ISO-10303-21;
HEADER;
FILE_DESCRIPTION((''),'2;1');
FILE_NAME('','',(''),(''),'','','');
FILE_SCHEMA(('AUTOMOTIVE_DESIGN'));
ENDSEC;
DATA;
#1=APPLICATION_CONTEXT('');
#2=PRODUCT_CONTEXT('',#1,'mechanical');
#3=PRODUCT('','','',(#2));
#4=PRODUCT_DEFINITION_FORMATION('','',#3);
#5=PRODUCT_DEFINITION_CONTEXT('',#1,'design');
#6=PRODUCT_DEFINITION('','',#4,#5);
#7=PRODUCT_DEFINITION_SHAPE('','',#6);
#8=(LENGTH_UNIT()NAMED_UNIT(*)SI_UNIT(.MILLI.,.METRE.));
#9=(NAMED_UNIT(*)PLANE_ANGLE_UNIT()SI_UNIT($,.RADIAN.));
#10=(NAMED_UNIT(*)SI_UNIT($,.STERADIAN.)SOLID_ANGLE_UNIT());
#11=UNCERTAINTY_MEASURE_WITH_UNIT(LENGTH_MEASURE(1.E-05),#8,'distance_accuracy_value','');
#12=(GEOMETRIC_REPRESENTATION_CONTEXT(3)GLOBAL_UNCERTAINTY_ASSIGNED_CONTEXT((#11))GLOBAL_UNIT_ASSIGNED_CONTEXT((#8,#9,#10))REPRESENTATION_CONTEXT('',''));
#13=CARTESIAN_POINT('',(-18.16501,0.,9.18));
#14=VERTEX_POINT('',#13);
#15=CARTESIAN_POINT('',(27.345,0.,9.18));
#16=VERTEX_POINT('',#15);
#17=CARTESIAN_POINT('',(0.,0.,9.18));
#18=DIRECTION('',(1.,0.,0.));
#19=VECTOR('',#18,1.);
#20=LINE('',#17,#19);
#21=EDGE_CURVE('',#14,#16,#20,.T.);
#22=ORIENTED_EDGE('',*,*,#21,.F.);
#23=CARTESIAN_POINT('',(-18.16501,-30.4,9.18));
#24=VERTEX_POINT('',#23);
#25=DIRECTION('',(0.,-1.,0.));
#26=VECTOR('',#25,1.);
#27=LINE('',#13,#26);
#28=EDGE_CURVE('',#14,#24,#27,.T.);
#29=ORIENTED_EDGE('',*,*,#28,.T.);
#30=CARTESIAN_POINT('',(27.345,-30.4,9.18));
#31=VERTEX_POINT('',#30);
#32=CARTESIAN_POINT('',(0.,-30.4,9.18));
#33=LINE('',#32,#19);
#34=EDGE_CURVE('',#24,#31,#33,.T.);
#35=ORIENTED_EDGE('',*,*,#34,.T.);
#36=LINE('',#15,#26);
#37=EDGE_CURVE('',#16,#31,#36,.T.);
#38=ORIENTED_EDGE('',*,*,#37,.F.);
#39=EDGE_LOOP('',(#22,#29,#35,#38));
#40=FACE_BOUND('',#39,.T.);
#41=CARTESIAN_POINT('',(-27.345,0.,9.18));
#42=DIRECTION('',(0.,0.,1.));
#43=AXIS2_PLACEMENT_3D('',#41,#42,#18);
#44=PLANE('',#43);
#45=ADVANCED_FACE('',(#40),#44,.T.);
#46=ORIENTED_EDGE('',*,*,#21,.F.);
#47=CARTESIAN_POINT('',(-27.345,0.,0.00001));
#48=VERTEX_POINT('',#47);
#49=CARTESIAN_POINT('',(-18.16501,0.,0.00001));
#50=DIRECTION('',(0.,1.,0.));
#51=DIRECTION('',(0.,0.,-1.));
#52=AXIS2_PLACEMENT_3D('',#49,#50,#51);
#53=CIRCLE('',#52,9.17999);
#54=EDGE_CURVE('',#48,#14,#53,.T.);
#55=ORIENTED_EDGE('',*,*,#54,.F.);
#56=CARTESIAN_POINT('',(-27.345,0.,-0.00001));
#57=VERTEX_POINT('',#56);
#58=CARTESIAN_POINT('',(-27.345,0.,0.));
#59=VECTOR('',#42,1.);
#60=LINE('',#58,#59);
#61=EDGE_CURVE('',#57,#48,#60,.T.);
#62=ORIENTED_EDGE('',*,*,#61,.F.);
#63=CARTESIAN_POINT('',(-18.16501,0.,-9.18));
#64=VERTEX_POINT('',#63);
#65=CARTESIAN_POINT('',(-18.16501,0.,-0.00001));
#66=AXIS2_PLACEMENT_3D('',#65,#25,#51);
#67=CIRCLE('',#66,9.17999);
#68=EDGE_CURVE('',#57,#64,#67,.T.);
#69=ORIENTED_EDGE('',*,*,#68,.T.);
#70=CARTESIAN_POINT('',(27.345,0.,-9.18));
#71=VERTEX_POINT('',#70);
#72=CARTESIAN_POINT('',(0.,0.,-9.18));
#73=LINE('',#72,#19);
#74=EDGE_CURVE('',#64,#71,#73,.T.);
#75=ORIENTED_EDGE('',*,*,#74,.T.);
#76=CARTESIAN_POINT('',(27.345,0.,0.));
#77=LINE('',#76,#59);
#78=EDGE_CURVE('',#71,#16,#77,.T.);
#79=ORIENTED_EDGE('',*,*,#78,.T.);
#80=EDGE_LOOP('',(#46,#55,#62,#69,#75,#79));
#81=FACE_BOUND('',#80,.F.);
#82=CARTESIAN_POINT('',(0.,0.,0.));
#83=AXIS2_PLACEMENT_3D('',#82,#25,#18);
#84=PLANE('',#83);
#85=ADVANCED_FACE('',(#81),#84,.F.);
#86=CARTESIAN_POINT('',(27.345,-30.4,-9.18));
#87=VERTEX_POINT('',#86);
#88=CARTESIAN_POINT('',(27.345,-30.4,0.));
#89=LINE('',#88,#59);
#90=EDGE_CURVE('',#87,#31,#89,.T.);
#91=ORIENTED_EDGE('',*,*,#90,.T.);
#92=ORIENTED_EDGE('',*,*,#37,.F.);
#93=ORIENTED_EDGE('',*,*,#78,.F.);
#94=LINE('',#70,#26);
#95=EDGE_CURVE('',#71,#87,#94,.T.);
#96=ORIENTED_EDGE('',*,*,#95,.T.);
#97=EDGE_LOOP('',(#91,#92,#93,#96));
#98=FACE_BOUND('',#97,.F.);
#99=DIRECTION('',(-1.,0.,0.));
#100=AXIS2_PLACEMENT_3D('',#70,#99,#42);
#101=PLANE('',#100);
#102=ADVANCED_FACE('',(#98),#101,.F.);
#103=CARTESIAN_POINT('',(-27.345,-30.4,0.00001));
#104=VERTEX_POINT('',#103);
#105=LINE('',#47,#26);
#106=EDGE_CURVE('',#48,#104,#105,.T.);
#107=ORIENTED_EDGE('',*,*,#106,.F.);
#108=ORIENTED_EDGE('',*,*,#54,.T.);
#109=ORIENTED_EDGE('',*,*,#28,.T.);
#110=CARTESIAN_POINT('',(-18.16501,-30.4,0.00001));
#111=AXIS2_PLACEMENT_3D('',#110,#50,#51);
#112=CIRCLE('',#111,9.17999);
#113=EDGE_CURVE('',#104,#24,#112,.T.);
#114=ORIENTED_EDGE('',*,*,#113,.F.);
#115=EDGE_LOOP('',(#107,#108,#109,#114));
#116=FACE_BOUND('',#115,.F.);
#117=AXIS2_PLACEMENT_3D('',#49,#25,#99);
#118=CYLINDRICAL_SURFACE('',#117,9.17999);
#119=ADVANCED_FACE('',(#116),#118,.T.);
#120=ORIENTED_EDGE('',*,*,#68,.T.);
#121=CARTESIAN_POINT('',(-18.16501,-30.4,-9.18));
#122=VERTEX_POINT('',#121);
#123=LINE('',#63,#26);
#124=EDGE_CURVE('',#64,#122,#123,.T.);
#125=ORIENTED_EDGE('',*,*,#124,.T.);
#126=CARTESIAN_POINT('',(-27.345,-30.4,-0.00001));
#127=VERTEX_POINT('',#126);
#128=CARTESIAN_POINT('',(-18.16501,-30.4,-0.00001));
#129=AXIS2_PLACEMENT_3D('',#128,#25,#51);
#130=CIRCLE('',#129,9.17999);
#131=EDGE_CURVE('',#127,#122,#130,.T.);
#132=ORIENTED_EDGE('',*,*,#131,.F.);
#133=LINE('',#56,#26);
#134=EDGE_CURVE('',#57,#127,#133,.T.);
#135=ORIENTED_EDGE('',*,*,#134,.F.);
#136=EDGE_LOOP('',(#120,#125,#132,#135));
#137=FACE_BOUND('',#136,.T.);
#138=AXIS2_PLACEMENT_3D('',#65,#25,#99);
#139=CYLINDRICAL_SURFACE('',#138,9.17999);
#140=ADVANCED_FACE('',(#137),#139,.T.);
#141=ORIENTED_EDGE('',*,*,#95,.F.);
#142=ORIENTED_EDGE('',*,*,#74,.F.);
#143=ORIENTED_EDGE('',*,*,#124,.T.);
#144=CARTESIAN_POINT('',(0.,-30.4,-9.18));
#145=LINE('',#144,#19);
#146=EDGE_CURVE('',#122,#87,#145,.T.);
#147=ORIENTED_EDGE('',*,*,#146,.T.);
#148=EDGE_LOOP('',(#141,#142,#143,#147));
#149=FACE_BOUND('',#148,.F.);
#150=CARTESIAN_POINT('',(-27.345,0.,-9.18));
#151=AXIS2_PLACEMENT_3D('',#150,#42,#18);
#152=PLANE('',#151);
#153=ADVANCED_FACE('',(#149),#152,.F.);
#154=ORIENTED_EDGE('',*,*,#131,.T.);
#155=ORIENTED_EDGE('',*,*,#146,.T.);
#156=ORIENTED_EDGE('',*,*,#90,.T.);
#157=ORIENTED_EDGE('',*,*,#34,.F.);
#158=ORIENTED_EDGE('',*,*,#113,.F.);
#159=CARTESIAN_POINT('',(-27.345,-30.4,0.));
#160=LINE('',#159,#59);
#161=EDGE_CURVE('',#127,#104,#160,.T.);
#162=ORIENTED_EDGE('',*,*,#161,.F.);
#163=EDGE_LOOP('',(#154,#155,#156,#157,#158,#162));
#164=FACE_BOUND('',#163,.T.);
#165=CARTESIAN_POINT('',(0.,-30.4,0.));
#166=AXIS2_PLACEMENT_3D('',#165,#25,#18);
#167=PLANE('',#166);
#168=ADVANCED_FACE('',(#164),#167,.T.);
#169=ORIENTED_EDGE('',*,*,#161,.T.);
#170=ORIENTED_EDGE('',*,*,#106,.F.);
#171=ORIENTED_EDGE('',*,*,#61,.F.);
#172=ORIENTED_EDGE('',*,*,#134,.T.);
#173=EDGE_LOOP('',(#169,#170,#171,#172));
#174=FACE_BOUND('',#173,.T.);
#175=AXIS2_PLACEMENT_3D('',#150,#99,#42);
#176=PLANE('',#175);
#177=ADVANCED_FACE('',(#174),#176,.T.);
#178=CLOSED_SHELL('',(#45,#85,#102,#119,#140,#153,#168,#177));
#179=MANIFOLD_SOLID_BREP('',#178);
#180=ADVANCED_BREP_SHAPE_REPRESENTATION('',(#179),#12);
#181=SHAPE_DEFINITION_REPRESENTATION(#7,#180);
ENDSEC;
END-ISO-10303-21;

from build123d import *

# Parameters (mm, degrees)
F0_W     = 54.69
F0_H     = 18.36
F1_DEPTH = 30.4
F2_R     = 9.17999


# Not quite as in the source:
# - a fillet or chamfer is up to 0.001 mm smaller than in the source, because OpenCascade refuses the exact size


with BuildPart() as f1:
    # F0 (on Front) → F1 (new body)
    with BuildSketch(Plane.XZ):
        Rectangle(F0_W, F0_H)
    extrude(amount=F1_DEPTH)

    # F2 (radius 9.18 in the source; OpenCascade refuses exactly that, so slightly less here)
    f2_edges = [f1.edges().sort_by_distance(p)[0] for p in [
        (-27.345, -15.2, 9.18),
        (-27.345, -15.2, -9.18),
    ]]
    fillet(f2_edges, radius=F2_R)


solid = f1.part
